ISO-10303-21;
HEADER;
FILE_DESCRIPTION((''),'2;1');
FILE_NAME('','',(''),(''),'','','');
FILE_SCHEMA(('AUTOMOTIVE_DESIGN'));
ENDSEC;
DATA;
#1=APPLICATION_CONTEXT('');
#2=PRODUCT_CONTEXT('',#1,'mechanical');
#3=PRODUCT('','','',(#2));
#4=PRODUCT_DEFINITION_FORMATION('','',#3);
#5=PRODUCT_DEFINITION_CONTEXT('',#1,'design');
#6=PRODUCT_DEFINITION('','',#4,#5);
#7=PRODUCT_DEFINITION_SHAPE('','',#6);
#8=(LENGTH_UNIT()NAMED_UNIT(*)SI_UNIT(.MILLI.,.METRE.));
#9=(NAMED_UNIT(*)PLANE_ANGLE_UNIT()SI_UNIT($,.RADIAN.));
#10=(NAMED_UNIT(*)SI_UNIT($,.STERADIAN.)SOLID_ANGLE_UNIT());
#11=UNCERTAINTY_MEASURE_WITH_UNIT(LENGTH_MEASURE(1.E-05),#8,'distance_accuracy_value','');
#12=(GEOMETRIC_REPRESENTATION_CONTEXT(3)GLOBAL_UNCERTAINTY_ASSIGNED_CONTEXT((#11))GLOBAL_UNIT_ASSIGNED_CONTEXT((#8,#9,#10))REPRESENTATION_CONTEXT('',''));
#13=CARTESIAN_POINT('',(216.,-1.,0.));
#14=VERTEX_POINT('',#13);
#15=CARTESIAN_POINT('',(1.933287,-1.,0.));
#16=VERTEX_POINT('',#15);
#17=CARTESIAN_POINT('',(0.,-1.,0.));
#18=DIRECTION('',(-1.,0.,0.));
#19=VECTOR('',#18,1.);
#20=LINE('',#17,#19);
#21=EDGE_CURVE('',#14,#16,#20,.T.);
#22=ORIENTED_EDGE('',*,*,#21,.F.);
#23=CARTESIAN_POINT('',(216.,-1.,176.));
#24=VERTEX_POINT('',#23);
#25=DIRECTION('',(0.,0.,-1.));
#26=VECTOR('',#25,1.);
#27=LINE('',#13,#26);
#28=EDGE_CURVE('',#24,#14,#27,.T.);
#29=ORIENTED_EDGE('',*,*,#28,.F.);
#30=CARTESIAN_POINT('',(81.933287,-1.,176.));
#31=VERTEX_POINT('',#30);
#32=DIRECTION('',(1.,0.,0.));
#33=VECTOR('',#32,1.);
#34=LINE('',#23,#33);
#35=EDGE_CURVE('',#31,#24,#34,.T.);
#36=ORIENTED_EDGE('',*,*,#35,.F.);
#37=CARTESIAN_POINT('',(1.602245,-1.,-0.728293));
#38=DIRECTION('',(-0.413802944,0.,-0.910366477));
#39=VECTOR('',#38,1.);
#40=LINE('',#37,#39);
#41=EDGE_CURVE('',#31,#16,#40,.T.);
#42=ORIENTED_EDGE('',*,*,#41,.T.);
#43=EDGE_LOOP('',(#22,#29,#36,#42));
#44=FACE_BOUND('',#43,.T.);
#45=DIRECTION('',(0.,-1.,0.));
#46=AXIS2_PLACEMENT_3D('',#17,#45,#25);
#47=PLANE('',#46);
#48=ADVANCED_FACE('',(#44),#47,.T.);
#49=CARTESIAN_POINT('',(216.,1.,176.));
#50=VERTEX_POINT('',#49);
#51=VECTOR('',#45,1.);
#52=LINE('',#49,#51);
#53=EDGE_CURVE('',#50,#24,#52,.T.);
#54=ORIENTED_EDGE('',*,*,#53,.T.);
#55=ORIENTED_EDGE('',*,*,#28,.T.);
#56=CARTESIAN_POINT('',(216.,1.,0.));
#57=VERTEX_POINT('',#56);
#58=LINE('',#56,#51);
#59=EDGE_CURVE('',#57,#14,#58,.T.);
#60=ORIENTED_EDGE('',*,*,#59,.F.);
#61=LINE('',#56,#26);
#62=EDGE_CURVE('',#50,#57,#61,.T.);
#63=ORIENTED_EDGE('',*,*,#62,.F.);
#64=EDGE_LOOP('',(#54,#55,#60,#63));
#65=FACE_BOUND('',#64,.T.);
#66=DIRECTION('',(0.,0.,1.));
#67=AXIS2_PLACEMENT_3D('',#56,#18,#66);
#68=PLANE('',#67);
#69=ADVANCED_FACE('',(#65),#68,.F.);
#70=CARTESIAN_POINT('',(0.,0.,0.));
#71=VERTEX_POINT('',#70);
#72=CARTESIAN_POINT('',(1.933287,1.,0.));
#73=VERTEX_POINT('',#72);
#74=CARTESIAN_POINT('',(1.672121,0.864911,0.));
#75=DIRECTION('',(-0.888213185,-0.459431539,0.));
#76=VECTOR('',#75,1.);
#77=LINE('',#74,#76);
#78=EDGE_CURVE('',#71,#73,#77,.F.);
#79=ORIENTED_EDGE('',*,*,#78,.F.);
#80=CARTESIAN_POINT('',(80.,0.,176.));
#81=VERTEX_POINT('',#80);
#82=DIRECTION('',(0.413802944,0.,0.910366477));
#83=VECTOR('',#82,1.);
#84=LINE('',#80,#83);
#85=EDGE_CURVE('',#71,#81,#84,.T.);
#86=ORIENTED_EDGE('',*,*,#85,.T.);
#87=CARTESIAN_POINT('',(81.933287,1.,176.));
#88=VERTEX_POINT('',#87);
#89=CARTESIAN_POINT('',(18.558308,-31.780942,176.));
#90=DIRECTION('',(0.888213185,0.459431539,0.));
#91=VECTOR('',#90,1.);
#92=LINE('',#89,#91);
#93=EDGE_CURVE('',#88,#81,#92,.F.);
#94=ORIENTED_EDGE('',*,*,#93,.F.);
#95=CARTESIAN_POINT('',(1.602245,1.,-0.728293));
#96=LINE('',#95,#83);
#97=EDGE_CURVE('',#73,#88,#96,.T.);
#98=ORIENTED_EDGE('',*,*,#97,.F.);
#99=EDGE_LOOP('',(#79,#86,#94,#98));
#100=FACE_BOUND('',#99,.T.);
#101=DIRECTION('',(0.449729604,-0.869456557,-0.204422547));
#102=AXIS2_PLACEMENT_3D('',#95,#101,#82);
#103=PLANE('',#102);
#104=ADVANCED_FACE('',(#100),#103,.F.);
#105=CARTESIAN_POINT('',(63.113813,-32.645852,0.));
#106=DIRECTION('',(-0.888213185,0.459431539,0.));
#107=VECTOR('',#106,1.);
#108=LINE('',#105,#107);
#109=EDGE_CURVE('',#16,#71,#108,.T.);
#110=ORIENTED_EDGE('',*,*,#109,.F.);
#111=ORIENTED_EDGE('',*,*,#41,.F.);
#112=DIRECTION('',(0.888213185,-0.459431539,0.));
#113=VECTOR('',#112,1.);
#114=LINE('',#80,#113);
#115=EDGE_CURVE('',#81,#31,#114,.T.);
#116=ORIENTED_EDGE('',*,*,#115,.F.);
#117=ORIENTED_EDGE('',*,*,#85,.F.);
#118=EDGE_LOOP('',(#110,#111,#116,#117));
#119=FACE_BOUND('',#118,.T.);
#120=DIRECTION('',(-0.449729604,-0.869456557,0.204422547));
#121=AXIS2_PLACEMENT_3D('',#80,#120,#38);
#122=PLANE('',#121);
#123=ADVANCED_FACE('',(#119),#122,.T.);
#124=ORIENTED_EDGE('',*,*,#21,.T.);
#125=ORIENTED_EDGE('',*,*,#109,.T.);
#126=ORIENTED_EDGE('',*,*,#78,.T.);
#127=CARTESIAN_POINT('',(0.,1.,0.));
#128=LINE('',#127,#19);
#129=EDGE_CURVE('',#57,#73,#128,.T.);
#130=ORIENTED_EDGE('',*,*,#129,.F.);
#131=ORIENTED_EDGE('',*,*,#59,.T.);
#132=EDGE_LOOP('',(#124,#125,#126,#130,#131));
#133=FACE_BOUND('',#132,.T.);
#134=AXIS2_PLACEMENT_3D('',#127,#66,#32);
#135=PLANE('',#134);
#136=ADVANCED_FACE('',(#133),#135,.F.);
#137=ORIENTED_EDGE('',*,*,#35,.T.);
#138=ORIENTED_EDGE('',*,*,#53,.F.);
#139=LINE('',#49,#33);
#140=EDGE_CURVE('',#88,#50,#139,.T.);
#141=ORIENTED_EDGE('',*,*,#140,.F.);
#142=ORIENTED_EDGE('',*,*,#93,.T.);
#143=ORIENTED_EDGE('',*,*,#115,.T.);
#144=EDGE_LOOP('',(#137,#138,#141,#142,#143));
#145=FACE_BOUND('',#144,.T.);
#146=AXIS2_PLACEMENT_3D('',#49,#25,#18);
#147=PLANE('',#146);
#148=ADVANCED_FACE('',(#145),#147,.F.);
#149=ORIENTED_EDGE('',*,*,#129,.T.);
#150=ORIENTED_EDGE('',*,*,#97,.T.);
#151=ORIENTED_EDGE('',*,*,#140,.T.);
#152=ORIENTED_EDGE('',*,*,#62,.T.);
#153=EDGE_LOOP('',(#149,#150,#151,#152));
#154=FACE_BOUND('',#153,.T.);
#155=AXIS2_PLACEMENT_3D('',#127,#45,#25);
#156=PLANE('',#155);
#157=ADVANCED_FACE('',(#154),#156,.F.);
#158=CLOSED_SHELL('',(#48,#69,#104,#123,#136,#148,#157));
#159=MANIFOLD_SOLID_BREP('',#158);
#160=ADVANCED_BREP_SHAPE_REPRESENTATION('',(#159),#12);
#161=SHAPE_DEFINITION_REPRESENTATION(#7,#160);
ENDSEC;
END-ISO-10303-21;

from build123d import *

# Parameters (mm, degrees)
BOSS_EXTRUDE1_DEPTH = 1
CHAMFER1_SIZE       = 1.76
CHAMFER1_SIZE2      = 1
CHAMFER2_SIZE2      = 1.76
CHAMFER2_SIZE       = 1


with BuildPart() as part:
    # Sketch1 → Boss-Extrude1 (new, symmetric)
    with BuildSketch(Plane(origin=(0, 0, 0), x_dir=(1, 0, 0), z_dir=(0, 1, 0))):
        Polygon((0, 0), (216, 0), (216, -176), (80, -176), align=None)
    extrude(amount=BOSS_EXTRUDE1_DEPTH, both=True)

    # Chamfer1
    chamfer1_edges = [part.edges().sort_by_distance(p)[0] for p in [
        (40, -1, 88),
    ]]
    chamfer1_side = [part.faces().sort_by_distance(p)[0] for p in [
        (126.484848485, -1, 81.333333333),
    ]]
    chamfer(chamfer1_edges, length=CHAMFER1_SIZE, length2=CHAMFER1_SIZE2, reference=chamfer1_side[0])

    # Chamfer2
    chamfer2_edges = [part.edges().sort_by_distance(p)[0] for p in [
        (40, 1, 88),
    ]]
    chamfer2_side = [part.faces().sort_by_distance(p)[0] for p in [
        (40, 0.98, 88),
    ]]
    chamfer(chamfer2_edges, length=CHAMFER2_SIZE - 0.0001, length2=CHAMFER2_SIZE2 - 0.0001, reference=chamfer2_side[0])  # a hair under: the kernel refuses the full size


solid = part.part
